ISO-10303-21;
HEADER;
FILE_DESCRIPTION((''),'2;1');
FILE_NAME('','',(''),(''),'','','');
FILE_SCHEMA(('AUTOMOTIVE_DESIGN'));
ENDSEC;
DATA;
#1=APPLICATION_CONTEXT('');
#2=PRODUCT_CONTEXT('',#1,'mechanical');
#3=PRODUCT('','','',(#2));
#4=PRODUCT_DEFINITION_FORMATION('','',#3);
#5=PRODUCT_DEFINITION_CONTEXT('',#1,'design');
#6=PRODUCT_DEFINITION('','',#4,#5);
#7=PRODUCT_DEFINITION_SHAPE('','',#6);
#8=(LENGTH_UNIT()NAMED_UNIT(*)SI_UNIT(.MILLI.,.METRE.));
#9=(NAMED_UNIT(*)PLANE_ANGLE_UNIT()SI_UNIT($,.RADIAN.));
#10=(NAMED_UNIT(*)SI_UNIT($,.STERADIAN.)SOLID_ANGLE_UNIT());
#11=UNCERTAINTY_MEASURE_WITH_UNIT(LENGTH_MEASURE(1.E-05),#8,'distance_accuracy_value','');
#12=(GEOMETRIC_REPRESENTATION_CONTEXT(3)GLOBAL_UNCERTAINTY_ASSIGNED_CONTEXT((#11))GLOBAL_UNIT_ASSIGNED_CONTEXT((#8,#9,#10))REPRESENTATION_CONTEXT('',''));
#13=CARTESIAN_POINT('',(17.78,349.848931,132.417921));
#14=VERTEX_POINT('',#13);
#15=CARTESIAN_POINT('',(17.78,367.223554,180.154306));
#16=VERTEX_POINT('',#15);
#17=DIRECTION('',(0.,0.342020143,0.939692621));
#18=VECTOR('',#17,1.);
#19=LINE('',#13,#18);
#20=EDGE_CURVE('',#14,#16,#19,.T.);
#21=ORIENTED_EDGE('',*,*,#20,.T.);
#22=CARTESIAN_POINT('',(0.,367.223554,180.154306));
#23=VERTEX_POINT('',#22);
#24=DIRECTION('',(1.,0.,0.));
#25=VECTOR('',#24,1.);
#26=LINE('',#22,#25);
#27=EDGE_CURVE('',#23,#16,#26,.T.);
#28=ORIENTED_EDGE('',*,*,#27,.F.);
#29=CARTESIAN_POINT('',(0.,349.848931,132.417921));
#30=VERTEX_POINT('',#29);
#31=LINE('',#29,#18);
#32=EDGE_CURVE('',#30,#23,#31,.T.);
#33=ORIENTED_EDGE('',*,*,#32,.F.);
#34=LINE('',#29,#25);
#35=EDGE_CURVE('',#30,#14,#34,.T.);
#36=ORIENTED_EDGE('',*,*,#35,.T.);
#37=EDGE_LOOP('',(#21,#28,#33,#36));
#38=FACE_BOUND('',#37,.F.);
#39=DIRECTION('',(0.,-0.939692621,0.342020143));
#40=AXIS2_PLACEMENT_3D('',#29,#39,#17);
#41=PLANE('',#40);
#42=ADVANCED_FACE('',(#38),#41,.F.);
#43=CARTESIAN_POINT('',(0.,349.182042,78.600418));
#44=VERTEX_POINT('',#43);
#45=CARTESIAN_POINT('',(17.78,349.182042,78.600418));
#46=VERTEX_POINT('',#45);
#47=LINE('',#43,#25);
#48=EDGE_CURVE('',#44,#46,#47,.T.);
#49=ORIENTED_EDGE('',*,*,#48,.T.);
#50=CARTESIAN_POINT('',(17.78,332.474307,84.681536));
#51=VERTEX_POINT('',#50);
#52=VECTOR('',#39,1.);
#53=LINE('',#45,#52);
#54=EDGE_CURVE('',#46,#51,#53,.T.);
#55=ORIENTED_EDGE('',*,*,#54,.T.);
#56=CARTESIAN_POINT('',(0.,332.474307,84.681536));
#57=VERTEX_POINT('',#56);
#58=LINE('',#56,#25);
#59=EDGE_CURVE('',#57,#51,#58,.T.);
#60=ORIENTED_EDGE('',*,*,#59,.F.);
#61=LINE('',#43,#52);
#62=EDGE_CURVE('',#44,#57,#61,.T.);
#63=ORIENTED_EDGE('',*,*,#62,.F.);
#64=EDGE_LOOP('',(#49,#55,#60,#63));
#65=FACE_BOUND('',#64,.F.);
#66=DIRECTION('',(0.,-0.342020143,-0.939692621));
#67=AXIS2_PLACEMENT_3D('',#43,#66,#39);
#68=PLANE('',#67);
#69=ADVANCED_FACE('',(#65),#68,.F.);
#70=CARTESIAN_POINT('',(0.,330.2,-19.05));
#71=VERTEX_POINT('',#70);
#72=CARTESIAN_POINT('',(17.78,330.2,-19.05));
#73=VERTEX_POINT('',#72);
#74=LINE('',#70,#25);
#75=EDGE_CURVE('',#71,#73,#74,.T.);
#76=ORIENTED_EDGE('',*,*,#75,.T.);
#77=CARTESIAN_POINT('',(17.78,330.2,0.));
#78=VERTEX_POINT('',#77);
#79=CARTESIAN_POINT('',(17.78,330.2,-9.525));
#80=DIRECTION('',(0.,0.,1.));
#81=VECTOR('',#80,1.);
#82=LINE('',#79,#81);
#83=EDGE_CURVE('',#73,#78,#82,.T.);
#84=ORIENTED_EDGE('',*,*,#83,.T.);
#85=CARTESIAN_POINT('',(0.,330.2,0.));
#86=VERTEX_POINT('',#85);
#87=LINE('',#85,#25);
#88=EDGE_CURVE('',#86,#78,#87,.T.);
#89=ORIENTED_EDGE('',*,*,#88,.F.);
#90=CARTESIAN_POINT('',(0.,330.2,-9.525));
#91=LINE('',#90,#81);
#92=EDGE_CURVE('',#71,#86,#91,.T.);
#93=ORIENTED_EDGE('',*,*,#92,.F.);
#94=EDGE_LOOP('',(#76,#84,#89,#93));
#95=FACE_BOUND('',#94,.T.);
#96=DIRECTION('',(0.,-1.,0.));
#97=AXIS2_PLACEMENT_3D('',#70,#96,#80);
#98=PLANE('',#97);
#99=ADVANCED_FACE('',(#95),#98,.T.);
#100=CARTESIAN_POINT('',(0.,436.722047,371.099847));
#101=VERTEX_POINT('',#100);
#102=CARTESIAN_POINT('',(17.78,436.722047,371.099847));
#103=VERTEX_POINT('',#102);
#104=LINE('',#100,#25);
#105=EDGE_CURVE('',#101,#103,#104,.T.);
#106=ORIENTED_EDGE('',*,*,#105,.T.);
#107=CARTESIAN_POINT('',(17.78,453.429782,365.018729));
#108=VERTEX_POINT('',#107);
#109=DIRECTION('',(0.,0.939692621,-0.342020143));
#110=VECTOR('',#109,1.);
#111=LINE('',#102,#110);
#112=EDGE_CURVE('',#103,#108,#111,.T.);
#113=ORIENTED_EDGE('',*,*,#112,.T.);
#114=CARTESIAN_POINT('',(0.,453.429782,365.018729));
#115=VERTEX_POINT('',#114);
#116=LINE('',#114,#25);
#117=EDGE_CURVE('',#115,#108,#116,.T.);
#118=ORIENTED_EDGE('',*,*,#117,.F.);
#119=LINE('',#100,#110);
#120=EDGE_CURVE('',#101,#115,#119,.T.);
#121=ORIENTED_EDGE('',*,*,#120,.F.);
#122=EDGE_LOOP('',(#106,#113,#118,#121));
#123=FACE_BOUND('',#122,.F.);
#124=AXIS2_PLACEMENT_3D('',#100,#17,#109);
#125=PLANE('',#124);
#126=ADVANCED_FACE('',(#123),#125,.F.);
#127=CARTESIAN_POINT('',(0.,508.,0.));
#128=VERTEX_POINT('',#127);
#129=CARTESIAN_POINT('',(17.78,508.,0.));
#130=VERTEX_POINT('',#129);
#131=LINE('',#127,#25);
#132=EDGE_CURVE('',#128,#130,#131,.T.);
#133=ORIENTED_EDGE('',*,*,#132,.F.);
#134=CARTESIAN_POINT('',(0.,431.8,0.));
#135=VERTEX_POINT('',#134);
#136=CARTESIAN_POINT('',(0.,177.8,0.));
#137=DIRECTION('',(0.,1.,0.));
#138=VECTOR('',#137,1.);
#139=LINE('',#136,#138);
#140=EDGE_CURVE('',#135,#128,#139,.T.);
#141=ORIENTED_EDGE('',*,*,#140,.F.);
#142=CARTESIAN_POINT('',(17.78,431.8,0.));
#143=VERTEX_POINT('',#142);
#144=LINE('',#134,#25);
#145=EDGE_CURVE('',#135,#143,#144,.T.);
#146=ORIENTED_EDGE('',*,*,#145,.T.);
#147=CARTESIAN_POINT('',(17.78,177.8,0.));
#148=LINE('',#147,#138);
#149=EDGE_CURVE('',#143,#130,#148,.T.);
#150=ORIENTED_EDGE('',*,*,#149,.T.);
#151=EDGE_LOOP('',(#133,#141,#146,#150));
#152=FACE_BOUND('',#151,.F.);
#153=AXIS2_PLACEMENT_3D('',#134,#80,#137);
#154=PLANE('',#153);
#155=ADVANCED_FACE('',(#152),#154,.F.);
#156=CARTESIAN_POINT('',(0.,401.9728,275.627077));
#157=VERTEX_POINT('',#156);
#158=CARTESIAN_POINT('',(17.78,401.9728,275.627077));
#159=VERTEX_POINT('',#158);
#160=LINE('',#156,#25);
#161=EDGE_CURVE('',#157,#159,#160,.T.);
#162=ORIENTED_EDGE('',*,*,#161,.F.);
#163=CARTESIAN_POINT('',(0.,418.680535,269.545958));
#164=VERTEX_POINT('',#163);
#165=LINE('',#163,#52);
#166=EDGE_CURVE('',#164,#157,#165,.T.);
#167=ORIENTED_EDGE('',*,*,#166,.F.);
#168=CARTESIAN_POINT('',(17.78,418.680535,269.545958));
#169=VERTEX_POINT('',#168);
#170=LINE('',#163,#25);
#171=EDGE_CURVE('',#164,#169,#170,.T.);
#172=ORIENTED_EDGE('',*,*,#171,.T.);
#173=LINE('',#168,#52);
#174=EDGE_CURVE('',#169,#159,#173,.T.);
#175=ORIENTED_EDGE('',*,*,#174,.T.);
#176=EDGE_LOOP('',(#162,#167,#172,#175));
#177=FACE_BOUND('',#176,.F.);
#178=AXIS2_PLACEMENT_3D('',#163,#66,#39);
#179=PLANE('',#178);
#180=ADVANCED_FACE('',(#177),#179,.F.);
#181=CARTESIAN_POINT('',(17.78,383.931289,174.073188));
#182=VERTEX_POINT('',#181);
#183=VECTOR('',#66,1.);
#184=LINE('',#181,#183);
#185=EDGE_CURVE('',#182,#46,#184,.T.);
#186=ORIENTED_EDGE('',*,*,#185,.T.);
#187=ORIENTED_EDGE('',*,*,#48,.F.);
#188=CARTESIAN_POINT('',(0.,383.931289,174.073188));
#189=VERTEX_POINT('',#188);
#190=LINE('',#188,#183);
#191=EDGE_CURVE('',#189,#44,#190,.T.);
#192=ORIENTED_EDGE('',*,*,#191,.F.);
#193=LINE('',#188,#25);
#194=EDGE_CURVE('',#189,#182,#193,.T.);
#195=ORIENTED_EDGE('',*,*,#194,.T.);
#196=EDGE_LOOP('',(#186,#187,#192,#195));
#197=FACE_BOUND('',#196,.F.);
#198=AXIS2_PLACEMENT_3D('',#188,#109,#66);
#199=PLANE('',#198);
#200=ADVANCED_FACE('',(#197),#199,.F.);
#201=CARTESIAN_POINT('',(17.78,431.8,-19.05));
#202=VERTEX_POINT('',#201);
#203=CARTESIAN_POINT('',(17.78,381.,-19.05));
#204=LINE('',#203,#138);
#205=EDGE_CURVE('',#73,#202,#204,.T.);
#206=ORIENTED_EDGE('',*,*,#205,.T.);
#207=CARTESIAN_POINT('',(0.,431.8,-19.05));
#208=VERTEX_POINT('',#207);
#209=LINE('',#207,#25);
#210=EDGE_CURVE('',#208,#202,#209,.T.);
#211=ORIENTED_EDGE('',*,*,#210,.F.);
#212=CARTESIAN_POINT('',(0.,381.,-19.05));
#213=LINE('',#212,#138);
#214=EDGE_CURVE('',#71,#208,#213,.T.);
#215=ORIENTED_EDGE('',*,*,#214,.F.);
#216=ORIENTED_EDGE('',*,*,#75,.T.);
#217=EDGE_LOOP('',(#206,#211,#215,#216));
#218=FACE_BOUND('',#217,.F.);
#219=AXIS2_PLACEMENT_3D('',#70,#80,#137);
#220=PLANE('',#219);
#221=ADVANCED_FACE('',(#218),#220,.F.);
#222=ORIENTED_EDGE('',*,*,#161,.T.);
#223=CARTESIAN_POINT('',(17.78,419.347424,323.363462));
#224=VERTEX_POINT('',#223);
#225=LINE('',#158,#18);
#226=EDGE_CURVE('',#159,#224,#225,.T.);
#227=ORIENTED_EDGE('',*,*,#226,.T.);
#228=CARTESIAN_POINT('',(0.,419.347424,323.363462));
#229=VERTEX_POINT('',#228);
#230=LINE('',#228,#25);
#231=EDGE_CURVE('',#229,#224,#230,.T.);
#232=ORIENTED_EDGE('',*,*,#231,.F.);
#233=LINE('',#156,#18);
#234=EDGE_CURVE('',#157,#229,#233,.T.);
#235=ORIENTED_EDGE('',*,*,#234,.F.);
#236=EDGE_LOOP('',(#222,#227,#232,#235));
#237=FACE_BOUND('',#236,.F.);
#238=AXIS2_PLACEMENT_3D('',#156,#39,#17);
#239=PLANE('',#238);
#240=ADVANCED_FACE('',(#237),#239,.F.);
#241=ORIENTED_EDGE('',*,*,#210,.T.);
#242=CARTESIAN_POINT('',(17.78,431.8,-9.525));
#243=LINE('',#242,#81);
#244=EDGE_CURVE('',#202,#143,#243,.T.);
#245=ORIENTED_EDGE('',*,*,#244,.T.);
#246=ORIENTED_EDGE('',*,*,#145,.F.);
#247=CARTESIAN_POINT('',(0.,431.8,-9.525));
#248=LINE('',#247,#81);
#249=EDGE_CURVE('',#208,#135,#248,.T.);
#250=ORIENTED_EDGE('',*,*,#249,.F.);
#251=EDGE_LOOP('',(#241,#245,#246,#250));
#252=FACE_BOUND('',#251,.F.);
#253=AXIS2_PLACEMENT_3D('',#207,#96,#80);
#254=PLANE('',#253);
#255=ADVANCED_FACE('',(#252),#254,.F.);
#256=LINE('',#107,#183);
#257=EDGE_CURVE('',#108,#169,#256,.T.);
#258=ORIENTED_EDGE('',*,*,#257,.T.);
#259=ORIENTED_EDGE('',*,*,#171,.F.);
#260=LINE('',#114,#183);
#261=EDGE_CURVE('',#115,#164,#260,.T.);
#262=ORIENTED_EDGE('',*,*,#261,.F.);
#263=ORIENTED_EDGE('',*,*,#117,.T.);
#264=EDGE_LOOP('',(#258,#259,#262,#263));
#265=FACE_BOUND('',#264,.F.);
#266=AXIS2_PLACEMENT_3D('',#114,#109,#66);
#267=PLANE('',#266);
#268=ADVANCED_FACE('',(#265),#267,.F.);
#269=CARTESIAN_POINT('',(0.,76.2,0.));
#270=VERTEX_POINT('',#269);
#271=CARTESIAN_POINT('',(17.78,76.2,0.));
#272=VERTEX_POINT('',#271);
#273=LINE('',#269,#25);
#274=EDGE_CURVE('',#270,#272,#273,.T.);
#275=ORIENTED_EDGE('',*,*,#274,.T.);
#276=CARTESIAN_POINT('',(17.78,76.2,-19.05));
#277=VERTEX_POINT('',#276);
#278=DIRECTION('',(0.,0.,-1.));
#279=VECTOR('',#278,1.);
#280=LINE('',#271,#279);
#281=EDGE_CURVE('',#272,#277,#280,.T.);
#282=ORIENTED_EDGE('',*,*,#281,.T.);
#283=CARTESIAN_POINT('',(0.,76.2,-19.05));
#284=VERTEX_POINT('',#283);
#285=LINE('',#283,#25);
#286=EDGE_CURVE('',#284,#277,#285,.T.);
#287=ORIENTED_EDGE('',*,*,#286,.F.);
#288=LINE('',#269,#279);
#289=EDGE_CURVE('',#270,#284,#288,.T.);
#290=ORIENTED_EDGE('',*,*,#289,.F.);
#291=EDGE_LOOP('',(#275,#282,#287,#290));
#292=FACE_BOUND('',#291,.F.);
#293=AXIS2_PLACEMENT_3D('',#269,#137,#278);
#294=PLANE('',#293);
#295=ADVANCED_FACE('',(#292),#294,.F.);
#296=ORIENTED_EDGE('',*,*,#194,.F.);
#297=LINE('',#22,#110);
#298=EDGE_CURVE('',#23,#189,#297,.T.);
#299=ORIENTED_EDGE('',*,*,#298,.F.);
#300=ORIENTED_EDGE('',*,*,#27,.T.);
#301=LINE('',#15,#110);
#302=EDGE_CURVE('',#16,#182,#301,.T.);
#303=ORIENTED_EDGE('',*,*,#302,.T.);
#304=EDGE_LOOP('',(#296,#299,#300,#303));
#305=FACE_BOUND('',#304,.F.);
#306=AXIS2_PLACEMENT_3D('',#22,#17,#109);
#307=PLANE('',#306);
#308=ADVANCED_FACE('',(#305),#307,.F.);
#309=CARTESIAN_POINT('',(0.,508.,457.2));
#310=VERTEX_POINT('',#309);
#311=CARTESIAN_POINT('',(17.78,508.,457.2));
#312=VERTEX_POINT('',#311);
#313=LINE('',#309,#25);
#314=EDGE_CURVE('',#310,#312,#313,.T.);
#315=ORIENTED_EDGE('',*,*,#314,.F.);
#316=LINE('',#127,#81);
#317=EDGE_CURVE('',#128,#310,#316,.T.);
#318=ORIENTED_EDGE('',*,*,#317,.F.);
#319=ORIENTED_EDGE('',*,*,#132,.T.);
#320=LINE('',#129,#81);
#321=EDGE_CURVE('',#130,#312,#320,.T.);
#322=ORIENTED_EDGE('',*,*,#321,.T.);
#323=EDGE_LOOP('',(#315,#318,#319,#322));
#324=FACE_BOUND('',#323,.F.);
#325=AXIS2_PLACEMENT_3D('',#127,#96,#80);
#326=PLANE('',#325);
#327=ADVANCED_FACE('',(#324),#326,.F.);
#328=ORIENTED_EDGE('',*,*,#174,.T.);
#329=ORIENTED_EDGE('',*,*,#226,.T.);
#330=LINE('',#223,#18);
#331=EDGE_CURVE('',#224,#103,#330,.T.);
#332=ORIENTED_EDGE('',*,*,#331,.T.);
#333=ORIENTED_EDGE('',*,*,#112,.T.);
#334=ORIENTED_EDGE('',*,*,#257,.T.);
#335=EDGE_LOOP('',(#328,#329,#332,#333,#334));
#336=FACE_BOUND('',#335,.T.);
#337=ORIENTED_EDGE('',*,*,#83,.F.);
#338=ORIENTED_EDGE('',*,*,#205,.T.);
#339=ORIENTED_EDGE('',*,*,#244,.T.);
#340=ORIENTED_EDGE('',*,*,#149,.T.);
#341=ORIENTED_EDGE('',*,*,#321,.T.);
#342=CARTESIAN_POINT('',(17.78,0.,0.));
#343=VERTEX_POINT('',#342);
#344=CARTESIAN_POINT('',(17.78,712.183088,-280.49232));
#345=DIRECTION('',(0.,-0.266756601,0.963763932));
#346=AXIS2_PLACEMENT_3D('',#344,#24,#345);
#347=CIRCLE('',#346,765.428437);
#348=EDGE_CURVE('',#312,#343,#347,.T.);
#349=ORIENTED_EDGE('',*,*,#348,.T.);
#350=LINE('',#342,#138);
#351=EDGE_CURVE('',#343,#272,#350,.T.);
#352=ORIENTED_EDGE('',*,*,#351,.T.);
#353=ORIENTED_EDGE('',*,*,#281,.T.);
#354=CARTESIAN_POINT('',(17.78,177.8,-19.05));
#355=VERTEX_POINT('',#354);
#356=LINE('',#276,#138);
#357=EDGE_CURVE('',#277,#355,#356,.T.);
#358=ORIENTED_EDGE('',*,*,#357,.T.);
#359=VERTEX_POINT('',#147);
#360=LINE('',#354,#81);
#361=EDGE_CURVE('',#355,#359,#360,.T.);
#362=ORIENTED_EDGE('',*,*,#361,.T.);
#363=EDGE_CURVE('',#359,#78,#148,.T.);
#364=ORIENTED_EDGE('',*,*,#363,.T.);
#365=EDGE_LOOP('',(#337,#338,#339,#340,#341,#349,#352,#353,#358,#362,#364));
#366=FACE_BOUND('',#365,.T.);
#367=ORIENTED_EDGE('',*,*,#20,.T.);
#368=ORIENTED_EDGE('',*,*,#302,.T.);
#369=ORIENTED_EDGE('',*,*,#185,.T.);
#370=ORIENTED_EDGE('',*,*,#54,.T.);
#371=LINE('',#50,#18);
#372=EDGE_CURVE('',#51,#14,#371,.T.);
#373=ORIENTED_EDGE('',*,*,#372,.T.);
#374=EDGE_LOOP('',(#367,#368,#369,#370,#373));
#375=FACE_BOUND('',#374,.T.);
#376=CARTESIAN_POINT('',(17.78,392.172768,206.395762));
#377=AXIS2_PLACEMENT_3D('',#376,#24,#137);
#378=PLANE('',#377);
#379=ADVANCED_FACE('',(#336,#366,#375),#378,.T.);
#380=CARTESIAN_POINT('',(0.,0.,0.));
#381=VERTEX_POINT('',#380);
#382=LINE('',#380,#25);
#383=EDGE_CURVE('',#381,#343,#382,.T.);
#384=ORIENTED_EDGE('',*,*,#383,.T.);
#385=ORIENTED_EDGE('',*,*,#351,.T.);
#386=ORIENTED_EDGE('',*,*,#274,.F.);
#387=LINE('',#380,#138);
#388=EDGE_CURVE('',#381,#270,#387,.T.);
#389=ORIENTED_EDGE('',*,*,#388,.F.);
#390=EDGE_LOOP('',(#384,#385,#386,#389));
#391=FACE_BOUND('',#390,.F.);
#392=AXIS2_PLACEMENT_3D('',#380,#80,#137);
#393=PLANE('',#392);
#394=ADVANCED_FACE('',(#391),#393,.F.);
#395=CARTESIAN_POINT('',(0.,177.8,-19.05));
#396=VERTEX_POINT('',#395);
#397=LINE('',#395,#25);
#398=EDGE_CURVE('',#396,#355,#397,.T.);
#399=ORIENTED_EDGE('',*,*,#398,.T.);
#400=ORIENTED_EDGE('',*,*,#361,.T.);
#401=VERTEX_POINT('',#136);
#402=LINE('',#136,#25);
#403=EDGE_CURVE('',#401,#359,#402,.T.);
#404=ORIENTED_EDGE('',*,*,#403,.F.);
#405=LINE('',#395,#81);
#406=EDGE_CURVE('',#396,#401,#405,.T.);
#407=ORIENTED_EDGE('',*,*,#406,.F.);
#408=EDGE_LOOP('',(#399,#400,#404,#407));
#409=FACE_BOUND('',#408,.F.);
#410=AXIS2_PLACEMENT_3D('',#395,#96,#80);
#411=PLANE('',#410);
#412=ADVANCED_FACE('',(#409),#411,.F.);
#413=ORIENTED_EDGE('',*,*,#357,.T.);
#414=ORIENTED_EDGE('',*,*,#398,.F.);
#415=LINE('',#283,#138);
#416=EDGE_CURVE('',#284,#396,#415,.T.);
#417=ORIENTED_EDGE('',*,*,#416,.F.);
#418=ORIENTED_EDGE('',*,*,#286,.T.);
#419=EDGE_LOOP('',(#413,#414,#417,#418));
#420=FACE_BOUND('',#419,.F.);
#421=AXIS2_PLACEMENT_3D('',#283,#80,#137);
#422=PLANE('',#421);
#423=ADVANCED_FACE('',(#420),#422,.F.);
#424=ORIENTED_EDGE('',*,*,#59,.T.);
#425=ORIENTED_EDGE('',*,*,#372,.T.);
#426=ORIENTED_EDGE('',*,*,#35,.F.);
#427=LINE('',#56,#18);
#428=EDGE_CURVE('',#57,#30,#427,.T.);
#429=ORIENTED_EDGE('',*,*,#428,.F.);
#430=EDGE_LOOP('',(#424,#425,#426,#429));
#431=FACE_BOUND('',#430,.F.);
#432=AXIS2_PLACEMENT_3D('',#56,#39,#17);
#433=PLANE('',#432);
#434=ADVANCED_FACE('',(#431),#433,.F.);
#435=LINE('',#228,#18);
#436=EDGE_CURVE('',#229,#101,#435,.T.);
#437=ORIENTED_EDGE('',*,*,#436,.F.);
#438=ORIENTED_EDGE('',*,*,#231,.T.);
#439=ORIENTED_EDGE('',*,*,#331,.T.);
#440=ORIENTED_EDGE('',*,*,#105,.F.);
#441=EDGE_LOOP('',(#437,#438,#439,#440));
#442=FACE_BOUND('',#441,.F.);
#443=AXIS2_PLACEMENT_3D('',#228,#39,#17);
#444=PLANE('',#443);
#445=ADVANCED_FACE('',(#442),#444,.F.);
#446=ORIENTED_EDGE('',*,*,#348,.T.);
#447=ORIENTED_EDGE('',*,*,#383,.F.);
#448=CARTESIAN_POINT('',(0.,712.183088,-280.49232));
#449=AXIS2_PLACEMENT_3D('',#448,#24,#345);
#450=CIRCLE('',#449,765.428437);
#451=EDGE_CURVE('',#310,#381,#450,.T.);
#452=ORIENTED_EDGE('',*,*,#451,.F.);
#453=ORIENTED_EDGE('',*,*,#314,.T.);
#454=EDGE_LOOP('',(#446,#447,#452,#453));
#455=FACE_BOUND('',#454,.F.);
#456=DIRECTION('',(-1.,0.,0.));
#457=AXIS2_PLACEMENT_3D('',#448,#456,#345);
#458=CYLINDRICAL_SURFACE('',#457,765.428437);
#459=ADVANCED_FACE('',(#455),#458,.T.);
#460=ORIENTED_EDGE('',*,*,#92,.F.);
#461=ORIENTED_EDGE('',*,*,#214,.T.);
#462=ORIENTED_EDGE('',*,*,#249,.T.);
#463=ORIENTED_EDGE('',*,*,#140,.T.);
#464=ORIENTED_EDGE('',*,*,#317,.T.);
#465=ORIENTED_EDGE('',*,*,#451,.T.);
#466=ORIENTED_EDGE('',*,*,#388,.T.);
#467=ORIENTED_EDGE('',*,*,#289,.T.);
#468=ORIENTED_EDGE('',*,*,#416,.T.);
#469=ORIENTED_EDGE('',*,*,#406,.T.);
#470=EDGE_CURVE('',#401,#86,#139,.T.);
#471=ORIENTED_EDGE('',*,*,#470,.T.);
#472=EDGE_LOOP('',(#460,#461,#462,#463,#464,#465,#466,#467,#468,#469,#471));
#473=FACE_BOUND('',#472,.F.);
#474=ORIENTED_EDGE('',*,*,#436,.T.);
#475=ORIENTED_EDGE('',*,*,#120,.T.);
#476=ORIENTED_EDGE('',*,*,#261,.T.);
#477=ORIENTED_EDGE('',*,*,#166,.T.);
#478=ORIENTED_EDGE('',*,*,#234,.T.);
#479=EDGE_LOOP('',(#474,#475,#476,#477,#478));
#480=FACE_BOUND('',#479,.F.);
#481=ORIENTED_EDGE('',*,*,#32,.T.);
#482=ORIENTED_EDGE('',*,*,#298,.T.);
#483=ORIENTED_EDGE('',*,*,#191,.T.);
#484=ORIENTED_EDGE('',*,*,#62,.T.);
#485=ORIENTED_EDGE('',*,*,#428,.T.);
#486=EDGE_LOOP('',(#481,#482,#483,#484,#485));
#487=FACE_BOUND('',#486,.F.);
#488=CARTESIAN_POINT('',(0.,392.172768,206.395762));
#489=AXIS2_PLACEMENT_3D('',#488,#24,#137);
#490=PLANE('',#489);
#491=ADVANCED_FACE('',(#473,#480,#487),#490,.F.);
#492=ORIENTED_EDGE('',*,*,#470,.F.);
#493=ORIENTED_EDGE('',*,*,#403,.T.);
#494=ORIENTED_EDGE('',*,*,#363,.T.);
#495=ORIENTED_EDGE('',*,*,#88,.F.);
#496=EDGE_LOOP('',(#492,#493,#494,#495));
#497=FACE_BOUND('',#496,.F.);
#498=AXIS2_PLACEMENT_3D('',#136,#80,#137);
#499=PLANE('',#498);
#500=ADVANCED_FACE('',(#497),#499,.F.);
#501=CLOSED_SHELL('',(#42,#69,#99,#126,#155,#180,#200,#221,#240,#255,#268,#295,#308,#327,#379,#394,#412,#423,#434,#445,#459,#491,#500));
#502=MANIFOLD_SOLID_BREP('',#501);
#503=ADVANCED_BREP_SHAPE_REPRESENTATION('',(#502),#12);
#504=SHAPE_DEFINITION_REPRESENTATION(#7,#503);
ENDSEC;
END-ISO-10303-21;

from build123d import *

# Parameters (mm, degrees)
F0_W     = 101.6
F0_H     = 19.05
F1_DEPTH = 17.78


# Not quite as in the source:
# - a feature names something its author has since deleted; it is built from what else it names


with BuildPart() as f1:
    # F0 (on Right) → F1 (new body)
    with BuildSketch(Plane.YZ):
        with BuildLine():
            ThreePointArc((508, 457.2), (375.1962383216, 406.7634952275), (254, 332.6544408126))
            Line((254, 332.6544408126), (254, 0))
            Line((254, 0), (330.2, 0))
            Line((330.2, 0), (431.8, 0))
            Line((431.8, 0), (508, 0))
            Line((508, 0), (508, 457.2))
        make_face()
        Polygon((349.8489306504, 132.4179212181), (367.2235539314, 180.154306354), (383.9312887289, 174.0731882056), (349.182042167, 78.6004179338), (332.4743073695, 84.6815360821), align=None, mode=Mode.SUBTRACT)
        Polygon((401.9728004932, 275.6270766258), (419.3474237742, 323.3634617617), (436.7220470551, 371.0998468977), (453.4297818527, 365.0187287493), (418.6805352908, 269.5459584775), align=None, mode=Mode.SUBTRACT)
        Polygon((127, 0), (76.2, 0), (76.2, -19.05), (177.8, -19.05), (177.8, 0), align=None)
        with BuildLine():
            ThreePointArc((254, 332.6544408126), (103.8213611206, 184.0253886947), (0, 0))
            Line((0, 0), (76.2, 0))
            Line((76.2, 0), (127, 0))
            Line((127, 0), (177.8, 0))
            Line((177.8, 0), (254, 0))
            Line((254, 0), (254, 332.6544408126))
        make_face()
        with Locations((381, -9.525)):
            Rectangle(F0_W, F0_H)
    extrude(amount=F1_DEPTH)


solid = f1.part
